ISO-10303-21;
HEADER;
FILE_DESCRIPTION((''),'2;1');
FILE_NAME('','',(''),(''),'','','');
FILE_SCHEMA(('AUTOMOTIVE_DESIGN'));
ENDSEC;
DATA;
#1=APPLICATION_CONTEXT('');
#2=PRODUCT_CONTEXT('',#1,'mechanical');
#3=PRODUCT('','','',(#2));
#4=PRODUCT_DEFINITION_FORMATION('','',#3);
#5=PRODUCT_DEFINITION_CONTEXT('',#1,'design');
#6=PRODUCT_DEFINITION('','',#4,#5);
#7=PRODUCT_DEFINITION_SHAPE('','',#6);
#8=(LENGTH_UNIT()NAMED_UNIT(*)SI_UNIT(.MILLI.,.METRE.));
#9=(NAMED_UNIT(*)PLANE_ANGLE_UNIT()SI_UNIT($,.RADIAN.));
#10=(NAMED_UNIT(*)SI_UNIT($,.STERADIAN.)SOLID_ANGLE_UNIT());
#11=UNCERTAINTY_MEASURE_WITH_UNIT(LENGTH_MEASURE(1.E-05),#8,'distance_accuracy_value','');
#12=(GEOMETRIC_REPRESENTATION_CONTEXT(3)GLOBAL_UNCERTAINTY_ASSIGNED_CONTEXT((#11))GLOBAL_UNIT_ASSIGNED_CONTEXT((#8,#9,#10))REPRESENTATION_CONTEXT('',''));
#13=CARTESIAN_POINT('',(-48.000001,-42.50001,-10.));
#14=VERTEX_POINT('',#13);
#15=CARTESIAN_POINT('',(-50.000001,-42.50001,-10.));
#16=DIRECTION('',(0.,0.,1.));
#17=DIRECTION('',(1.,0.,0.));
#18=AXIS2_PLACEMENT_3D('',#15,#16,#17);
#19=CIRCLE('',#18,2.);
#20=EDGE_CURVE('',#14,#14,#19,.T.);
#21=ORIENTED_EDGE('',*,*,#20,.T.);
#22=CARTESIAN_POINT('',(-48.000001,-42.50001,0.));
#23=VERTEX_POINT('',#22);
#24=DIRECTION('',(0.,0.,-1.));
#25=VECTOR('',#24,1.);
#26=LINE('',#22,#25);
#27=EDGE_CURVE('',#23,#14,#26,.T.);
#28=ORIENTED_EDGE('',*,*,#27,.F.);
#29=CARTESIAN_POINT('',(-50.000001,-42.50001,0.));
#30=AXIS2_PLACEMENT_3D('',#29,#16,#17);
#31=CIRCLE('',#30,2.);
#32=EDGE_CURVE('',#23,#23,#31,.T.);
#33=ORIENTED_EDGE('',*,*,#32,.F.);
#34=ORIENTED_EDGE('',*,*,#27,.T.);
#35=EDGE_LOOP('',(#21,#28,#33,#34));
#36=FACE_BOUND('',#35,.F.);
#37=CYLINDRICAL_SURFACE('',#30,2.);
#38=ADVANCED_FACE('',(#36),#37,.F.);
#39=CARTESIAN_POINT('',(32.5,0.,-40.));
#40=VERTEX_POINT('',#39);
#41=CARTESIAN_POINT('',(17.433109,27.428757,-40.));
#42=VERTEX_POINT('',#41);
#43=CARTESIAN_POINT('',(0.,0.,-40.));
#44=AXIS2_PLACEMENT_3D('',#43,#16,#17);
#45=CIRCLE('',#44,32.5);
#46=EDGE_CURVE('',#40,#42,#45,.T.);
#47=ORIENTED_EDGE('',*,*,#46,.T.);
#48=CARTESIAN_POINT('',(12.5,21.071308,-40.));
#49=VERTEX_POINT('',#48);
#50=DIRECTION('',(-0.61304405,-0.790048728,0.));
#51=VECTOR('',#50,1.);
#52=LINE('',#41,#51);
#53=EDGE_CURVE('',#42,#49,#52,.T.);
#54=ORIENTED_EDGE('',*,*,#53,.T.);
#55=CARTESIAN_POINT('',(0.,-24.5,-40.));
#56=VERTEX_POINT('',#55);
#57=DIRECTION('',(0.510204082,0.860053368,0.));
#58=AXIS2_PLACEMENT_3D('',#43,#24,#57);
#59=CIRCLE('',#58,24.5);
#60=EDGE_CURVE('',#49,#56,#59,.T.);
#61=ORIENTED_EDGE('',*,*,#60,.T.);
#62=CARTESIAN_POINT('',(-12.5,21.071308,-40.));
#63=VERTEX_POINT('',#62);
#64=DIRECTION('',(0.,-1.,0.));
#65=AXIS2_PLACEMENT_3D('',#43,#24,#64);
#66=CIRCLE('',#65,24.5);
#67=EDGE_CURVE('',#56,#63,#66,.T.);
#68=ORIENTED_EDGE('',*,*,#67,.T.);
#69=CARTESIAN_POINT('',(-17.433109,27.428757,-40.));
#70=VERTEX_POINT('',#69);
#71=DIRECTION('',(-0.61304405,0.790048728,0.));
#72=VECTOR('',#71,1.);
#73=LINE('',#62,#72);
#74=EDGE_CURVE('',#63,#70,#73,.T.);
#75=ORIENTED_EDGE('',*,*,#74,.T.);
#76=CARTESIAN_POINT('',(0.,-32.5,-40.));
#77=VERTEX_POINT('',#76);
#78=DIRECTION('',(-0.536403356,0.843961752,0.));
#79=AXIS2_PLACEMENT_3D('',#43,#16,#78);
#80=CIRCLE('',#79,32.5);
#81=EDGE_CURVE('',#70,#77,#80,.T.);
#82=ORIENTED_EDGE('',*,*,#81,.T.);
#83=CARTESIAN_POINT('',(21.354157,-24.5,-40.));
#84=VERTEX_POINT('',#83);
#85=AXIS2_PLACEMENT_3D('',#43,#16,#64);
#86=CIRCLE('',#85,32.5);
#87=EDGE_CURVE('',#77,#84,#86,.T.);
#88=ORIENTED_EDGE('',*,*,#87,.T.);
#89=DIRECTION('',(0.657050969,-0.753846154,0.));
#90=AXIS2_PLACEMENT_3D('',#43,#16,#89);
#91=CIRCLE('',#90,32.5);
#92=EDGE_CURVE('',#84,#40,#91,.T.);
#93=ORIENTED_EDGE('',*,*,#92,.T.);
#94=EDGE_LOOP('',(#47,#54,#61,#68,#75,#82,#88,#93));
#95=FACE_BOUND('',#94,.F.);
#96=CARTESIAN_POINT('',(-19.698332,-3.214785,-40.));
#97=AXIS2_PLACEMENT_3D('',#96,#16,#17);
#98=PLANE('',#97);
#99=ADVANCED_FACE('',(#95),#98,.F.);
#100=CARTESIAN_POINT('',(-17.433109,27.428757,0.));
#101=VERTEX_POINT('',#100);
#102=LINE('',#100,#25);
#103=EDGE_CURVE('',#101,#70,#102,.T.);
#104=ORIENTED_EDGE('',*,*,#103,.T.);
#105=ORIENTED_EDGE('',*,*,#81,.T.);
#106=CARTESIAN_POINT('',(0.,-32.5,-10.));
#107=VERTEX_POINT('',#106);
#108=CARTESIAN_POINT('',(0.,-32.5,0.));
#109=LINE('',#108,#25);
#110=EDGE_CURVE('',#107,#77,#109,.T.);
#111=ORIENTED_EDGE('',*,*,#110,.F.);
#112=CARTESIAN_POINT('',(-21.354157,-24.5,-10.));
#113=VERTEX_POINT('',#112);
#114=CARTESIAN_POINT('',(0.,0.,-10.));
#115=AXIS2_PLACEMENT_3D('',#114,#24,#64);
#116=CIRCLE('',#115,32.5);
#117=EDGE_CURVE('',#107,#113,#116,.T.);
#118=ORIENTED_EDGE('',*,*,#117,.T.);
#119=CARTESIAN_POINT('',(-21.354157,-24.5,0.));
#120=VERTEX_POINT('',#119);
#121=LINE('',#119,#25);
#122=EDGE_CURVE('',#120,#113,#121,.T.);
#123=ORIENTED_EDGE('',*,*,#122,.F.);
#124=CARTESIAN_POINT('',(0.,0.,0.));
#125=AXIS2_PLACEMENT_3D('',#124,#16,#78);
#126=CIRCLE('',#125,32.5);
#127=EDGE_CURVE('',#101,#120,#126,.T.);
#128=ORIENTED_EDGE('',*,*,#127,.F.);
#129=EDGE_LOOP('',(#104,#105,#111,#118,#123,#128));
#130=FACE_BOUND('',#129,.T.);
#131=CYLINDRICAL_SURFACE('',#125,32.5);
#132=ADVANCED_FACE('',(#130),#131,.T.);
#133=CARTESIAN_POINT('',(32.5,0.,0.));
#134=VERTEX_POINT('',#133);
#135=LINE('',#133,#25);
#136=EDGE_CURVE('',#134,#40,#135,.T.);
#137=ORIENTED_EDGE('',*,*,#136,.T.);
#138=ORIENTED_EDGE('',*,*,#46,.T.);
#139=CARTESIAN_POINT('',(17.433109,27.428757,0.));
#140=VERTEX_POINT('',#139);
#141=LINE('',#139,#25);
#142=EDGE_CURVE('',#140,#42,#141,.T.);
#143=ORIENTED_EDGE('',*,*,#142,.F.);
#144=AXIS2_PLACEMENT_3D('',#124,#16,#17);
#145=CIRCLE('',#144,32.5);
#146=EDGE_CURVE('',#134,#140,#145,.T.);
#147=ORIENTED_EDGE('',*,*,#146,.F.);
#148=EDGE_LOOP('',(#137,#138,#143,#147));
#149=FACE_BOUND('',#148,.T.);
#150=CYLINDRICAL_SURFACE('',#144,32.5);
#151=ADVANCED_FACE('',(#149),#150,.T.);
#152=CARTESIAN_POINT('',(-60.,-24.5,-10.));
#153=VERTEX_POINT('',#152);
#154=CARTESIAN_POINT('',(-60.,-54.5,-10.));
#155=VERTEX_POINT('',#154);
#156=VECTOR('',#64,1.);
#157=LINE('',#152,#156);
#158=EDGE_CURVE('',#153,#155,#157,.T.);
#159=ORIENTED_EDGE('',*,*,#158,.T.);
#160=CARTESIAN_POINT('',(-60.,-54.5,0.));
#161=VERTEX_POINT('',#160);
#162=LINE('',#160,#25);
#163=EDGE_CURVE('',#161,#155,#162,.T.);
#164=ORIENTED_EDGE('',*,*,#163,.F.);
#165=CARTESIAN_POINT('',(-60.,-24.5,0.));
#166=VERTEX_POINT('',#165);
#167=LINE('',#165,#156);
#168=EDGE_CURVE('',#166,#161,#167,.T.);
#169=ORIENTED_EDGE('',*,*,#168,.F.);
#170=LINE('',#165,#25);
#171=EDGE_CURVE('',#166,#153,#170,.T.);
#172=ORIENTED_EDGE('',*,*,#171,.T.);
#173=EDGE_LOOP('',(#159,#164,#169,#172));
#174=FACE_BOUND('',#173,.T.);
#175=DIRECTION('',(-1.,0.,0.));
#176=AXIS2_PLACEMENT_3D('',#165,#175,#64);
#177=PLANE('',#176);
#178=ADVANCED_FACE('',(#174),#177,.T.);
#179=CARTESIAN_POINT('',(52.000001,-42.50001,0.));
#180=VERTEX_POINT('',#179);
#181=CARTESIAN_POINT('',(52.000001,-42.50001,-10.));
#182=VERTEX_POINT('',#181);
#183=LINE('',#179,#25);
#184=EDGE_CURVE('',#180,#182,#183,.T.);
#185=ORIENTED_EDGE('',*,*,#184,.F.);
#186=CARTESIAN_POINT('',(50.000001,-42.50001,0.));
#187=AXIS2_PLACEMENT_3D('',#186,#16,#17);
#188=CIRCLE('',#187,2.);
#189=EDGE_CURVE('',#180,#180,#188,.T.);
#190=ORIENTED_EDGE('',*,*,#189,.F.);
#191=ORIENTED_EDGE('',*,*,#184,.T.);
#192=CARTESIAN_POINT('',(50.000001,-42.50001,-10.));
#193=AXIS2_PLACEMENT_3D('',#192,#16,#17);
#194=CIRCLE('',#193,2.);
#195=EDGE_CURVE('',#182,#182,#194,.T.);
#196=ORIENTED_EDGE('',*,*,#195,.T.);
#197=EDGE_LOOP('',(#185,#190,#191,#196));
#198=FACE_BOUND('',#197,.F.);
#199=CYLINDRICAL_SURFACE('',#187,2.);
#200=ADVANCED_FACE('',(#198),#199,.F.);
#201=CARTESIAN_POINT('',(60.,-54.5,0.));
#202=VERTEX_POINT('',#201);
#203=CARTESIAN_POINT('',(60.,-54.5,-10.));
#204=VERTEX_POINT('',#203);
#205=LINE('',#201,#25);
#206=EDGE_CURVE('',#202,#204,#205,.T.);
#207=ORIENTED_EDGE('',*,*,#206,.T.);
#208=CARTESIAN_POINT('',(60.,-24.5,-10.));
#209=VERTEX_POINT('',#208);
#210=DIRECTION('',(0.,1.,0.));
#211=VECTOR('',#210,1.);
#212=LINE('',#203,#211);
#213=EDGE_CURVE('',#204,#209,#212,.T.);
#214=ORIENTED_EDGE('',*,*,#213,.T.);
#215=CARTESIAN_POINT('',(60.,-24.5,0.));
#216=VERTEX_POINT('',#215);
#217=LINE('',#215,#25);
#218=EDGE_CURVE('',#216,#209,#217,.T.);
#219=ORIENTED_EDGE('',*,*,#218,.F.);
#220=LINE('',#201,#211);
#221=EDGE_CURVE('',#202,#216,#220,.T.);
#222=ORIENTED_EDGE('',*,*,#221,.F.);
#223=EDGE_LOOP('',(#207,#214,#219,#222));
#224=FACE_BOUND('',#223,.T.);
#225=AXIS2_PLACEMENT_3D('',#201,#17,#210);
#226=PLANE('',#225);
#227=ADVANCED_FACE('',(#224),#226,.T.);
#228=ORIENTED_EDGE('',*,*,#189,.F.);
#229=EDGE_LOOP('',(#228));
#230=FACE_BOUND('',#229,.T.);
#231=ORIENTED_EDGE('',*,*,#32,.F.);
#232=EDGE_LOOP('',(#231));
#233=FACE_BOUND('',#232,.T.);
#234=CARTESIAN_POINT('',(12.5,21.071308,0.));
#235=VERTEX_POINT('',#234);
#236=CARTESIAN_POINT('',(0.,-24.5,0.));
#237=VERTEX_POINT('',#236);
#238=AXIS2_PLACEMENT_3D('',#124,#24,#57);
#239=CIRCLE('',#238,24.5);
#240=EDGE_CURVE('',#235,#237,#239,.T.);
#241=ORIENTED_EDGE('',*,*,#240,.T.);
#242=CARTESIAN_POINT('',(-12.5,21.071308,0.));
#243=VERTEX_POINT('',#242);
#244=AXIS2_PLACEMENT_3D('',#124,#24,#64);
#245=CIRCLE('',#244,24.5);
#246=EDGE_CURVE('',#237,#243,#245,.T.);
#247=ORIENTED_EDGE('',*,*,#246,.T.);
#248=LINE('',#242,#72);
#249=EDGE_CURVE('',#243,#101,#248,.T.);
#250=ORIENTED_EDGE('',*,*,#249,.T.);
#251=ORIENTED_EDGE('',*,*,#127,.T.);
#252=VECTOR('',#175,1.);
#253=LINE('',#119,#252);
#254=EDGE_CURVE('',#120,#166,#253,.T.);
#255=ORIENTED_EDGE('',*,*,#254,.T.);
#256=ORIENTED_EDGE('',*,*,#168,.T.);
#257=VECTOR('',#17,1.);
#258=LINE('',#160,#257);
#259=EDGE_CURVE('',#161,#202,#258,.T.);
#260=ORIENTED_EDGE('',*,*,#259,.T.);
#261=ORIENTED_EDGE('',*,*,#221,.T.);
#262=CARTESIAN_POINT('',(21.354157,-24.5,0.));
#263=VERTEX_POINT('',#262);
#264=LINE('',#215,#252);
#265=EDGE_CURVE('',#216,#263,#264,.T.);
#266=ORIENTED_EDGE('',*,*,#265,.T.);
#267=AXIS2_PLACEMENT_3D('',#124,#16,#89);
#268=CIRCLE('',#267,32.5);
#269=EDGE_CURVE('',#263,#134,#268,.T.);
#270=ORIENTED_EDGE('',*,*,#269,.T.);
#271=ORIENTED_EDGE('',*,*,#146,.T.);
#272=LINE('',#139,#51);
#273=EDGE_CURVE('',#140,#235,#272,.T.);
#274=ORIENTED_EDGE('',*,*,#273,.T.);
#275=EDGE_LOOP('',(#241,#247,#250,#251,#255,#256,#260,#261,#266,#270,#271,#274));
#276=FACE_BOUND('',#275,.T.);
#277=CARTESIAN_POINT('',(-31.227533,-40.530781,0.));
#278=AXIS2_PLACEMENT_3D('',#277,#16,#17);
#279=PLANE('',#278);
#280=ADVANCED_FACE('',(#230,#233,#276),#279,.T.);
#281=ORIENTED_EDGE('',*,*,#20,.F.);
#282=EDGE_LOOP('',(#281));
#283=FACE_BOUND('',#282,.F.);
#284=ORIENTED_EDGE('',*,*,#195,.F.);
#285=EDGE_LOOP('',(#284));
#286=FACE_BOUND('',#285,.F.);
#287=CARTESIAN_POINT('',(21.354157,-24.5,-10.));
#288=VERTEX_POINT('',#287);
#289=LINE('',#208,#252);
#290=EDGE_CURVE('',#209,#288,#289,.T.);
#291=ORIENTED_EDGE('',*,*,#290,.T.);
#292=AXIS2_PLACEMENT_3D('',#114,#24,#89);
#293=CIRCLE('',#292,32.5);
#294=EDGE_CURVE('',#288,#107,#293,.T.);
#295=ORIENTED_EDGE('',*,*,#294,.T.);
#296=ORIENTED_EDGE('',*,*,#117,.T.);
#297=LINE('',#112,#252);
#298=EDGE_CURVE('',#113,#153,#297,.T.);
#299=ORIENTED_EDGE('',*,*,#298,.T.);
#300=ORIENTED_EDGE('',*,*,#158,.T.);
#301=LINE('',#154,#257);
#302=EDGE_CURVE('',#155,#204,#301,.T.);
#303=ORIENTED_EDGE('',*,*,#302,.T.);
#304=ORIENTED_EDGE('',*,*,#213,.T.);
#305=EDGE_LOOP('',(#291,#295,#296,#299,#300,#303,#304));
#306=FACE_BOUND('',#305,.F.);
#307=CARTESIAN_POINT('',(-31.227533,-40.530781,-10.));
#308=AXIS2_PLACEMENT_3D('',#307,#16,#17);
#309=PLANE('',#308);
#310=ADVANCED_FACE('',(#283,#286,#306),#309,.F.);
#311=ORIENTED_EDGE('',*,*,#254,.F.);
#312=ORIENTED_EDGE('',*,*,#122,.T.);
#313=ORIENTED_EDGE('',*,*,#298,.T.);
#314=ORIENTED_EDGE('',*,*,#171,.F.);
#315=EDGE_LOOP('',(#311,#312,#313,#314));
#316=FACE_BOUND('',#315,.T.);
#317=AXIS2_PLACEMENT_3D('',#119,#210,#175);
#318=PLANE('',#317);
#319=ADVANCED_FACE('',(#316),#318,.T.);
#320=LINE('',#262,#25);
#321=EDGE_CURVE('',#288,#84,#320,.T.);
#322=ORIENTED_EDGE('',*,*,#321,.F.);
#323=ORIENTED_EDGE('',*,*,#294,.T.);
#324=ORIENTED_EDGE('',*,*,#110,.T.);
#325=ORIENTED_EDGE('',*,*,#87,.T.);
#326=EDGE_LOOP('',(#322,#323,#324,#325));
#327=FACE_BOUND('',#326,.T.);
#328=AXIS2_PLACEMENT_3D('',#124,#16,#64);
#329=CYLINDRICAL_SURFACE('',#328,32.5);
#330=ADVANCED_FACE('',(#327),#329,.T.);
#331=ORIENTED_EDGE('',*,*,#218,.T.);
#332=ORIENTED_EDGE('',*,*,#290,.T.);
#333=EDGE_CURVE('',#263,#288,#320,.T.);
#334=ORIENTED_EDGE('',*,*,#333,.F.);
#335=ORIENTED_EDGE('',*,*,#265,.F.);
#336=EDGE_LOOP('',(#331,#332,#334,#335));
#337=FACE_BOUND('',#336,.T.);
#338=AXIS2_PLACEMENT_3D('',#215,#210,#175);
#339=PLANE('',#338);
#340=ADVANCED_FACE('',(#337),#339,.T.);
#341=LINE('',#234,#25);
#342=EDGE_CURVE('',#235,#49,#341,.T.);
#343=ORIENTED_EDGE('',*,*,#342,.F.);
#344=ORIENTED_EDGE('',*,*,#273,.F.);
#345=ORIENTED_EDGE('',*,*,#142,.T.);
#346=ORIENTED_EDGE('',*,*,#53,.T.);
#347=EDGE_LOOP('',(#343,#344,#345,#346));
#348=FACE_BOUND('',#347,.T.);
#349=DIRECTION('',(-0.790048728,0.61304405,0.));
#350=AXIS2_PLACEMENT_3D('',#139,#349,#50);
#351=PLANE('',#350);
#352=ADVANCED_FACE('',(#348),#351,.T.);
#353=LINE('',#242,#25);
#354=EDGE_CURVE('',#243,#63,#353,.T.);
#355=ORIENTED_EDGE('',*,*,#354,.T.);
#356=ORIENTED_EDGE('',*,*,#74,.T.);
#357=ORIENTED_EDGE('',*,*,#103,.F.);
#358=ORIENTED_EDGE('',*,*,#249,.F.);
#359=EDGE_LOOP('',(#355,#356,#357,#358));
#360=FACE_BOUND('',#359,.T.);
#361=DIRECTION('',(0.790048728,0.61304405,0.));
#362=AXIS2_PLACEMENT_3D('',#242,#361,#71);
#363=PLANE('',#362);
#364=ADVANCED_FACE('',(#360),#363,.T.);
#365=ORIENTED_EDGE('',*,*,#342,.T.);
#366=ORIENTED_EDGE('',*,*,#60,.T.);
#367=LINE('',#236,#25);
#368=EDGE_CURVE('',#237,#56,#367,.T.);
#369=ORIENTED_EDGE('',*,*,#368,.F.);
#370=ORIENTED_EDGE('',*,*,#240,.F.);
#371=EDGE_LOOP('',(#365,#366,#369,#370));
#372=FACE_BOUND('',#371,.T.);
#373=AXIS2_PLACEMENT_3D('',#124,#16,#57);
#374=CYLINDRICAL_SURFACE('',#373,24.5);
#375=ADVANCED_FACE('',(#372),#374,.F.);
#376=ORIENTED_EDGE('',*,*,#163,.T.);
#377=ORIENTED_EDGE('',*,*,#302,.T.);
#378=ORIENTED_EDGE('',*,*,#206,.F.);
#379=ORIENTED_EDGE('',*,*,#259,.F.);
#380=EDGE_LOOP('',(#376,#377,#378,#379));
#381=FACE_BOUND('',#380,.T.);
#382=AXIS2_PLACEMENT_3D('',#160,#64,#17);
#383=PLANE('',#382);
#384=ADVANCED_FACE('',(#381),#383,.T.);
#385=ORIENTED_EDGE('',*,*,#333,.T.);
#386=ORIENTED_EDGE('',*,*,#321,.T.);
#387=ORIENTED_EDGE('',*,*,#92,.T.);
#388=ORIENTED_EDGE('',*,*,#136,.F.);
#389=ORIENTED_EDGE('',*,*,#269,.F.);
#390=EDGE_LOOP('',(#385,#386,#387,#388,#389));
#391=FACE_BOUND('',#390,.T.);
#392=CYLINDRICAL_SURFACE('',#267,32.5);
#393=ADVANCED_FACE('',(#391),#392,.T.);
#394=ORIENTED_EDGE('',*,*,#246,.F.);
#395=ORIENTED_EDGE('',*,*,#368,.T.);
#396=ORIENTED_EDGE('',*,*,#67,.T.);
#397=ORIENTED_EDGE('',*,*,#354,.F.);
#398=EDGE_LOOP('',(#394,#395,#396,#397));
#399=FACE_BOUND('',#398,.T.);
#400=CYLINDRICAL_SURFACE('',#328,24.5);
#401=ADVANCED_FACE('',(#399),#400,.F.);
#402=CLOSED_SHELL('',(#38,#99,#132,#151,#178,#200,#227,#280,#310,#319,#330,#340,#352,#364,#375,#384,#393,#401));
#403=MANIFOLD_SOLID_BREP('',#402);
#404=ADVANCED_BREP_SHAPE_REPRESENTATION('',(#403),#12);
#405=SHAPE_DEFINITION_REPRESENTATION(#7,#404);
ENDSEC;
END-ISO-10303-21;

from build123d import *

# Parameters (mm, degrees)
F1_DEPTH = 40
F0_R     = 2
F2_DEPTH = 10


with BuildPart() as f1:
    # F0 (on Top) → F1 (new body)
    with BuildSketch(Plane.XY):
        with BuildLine():
            Line((-21.3541565041, -24.5), (0, -24.5))
            ThreePointArc((0, -24.5), (-23.6272833171, -6.4808551176), (-12.5, 21.0713075057))
            Line((-12.5, 21.0713075057), (-17.433109084, 27.4287569471))
            ThreePointArc((-17.433109084, 27.4287569471), (-32.4077451, 2.4470507823), (-21.3541565041, -24.5))
        make_face()
        with BuildLine():
            ThreePointArc((12.5, 21.0713075057), (21.289668856, 12.124355653), (24.5, 0))
            ThreePointArc((24.5, 0), (17.3241161391, -17.3241161391), (0, -24.5))
            Line((0, -24.5), (21.3541565041, -24.5))
            ThreePointArc((21.3541565041, -24.5), (29.582596965, -13.4580814684), (32.5, 0))
            ThreePointArc((32.5, 0), (28.4853124016, 15.6472674095), (17.433109084, 27.4287569471))
            Line((17.433109084, 27.4287569471), (12.5, 21.0713075057))
        make_face()
        with BuildLine():
            Line((21.3541565041, -24.5), (0, -24.5))
            Line((0, -24.5), (0, -32.5))
            ThreePointArc((0, -32.5), (11.401754251, -30.4343555871), (21.3541565041, -24.5))
        make_face()
        with BuildLine():
            Line((0, -32.5), (0, -24.5))
            Line((0, -24.5), (-21.3541565041, -24.5))
            ThreePointArc((-21.3541565041, -24.5), (-11.401754251, -30.4343555871), (0, -32.5))
        make_face()
    extrude(amount=-F1_DEPTH)

    # F0 (on Top) → F2 (join)
    with BuildSketch(Plane.XY):
        with BuildLine():
            Line((0, -54.5), (0, -32.5))
            ThreePointArc((0, -32.5), (-11.401754251, -30.4343555871), (-21.3541565041, -24.5))
            Line((-21.3541565041, -24.5), (-60, -24.5))
            Line((-60, -24.5), (-60, -54.5))
            Line((-60, -54.5), (0, -54.5))
        make_face()
        with Locations((-50.0000007451, -42.5000099838)):
            Circle(F0_R, mode=Mode.SUBTRACT)
        with BuildLine():
            ThreePointArc((21.3541565041, -24.5), (11.401754251, -30.4343555871), (0, -32.5))
            Line((0, -32.5), (0, -54.5))
            Line((0, -54.5), (60, -54.5))
            Line((60, -54.5), (60, -24.5))
            Line((60, -24.5), (21.3541565041, -24.5))
        make_face()
        with Locations((50.0000007451, -42.5000099838)):
            Circle(F0_R, mode=Mode.SUBTRACT)
    extrude(amount=-F2_DEPTH)


solid = f1.part
